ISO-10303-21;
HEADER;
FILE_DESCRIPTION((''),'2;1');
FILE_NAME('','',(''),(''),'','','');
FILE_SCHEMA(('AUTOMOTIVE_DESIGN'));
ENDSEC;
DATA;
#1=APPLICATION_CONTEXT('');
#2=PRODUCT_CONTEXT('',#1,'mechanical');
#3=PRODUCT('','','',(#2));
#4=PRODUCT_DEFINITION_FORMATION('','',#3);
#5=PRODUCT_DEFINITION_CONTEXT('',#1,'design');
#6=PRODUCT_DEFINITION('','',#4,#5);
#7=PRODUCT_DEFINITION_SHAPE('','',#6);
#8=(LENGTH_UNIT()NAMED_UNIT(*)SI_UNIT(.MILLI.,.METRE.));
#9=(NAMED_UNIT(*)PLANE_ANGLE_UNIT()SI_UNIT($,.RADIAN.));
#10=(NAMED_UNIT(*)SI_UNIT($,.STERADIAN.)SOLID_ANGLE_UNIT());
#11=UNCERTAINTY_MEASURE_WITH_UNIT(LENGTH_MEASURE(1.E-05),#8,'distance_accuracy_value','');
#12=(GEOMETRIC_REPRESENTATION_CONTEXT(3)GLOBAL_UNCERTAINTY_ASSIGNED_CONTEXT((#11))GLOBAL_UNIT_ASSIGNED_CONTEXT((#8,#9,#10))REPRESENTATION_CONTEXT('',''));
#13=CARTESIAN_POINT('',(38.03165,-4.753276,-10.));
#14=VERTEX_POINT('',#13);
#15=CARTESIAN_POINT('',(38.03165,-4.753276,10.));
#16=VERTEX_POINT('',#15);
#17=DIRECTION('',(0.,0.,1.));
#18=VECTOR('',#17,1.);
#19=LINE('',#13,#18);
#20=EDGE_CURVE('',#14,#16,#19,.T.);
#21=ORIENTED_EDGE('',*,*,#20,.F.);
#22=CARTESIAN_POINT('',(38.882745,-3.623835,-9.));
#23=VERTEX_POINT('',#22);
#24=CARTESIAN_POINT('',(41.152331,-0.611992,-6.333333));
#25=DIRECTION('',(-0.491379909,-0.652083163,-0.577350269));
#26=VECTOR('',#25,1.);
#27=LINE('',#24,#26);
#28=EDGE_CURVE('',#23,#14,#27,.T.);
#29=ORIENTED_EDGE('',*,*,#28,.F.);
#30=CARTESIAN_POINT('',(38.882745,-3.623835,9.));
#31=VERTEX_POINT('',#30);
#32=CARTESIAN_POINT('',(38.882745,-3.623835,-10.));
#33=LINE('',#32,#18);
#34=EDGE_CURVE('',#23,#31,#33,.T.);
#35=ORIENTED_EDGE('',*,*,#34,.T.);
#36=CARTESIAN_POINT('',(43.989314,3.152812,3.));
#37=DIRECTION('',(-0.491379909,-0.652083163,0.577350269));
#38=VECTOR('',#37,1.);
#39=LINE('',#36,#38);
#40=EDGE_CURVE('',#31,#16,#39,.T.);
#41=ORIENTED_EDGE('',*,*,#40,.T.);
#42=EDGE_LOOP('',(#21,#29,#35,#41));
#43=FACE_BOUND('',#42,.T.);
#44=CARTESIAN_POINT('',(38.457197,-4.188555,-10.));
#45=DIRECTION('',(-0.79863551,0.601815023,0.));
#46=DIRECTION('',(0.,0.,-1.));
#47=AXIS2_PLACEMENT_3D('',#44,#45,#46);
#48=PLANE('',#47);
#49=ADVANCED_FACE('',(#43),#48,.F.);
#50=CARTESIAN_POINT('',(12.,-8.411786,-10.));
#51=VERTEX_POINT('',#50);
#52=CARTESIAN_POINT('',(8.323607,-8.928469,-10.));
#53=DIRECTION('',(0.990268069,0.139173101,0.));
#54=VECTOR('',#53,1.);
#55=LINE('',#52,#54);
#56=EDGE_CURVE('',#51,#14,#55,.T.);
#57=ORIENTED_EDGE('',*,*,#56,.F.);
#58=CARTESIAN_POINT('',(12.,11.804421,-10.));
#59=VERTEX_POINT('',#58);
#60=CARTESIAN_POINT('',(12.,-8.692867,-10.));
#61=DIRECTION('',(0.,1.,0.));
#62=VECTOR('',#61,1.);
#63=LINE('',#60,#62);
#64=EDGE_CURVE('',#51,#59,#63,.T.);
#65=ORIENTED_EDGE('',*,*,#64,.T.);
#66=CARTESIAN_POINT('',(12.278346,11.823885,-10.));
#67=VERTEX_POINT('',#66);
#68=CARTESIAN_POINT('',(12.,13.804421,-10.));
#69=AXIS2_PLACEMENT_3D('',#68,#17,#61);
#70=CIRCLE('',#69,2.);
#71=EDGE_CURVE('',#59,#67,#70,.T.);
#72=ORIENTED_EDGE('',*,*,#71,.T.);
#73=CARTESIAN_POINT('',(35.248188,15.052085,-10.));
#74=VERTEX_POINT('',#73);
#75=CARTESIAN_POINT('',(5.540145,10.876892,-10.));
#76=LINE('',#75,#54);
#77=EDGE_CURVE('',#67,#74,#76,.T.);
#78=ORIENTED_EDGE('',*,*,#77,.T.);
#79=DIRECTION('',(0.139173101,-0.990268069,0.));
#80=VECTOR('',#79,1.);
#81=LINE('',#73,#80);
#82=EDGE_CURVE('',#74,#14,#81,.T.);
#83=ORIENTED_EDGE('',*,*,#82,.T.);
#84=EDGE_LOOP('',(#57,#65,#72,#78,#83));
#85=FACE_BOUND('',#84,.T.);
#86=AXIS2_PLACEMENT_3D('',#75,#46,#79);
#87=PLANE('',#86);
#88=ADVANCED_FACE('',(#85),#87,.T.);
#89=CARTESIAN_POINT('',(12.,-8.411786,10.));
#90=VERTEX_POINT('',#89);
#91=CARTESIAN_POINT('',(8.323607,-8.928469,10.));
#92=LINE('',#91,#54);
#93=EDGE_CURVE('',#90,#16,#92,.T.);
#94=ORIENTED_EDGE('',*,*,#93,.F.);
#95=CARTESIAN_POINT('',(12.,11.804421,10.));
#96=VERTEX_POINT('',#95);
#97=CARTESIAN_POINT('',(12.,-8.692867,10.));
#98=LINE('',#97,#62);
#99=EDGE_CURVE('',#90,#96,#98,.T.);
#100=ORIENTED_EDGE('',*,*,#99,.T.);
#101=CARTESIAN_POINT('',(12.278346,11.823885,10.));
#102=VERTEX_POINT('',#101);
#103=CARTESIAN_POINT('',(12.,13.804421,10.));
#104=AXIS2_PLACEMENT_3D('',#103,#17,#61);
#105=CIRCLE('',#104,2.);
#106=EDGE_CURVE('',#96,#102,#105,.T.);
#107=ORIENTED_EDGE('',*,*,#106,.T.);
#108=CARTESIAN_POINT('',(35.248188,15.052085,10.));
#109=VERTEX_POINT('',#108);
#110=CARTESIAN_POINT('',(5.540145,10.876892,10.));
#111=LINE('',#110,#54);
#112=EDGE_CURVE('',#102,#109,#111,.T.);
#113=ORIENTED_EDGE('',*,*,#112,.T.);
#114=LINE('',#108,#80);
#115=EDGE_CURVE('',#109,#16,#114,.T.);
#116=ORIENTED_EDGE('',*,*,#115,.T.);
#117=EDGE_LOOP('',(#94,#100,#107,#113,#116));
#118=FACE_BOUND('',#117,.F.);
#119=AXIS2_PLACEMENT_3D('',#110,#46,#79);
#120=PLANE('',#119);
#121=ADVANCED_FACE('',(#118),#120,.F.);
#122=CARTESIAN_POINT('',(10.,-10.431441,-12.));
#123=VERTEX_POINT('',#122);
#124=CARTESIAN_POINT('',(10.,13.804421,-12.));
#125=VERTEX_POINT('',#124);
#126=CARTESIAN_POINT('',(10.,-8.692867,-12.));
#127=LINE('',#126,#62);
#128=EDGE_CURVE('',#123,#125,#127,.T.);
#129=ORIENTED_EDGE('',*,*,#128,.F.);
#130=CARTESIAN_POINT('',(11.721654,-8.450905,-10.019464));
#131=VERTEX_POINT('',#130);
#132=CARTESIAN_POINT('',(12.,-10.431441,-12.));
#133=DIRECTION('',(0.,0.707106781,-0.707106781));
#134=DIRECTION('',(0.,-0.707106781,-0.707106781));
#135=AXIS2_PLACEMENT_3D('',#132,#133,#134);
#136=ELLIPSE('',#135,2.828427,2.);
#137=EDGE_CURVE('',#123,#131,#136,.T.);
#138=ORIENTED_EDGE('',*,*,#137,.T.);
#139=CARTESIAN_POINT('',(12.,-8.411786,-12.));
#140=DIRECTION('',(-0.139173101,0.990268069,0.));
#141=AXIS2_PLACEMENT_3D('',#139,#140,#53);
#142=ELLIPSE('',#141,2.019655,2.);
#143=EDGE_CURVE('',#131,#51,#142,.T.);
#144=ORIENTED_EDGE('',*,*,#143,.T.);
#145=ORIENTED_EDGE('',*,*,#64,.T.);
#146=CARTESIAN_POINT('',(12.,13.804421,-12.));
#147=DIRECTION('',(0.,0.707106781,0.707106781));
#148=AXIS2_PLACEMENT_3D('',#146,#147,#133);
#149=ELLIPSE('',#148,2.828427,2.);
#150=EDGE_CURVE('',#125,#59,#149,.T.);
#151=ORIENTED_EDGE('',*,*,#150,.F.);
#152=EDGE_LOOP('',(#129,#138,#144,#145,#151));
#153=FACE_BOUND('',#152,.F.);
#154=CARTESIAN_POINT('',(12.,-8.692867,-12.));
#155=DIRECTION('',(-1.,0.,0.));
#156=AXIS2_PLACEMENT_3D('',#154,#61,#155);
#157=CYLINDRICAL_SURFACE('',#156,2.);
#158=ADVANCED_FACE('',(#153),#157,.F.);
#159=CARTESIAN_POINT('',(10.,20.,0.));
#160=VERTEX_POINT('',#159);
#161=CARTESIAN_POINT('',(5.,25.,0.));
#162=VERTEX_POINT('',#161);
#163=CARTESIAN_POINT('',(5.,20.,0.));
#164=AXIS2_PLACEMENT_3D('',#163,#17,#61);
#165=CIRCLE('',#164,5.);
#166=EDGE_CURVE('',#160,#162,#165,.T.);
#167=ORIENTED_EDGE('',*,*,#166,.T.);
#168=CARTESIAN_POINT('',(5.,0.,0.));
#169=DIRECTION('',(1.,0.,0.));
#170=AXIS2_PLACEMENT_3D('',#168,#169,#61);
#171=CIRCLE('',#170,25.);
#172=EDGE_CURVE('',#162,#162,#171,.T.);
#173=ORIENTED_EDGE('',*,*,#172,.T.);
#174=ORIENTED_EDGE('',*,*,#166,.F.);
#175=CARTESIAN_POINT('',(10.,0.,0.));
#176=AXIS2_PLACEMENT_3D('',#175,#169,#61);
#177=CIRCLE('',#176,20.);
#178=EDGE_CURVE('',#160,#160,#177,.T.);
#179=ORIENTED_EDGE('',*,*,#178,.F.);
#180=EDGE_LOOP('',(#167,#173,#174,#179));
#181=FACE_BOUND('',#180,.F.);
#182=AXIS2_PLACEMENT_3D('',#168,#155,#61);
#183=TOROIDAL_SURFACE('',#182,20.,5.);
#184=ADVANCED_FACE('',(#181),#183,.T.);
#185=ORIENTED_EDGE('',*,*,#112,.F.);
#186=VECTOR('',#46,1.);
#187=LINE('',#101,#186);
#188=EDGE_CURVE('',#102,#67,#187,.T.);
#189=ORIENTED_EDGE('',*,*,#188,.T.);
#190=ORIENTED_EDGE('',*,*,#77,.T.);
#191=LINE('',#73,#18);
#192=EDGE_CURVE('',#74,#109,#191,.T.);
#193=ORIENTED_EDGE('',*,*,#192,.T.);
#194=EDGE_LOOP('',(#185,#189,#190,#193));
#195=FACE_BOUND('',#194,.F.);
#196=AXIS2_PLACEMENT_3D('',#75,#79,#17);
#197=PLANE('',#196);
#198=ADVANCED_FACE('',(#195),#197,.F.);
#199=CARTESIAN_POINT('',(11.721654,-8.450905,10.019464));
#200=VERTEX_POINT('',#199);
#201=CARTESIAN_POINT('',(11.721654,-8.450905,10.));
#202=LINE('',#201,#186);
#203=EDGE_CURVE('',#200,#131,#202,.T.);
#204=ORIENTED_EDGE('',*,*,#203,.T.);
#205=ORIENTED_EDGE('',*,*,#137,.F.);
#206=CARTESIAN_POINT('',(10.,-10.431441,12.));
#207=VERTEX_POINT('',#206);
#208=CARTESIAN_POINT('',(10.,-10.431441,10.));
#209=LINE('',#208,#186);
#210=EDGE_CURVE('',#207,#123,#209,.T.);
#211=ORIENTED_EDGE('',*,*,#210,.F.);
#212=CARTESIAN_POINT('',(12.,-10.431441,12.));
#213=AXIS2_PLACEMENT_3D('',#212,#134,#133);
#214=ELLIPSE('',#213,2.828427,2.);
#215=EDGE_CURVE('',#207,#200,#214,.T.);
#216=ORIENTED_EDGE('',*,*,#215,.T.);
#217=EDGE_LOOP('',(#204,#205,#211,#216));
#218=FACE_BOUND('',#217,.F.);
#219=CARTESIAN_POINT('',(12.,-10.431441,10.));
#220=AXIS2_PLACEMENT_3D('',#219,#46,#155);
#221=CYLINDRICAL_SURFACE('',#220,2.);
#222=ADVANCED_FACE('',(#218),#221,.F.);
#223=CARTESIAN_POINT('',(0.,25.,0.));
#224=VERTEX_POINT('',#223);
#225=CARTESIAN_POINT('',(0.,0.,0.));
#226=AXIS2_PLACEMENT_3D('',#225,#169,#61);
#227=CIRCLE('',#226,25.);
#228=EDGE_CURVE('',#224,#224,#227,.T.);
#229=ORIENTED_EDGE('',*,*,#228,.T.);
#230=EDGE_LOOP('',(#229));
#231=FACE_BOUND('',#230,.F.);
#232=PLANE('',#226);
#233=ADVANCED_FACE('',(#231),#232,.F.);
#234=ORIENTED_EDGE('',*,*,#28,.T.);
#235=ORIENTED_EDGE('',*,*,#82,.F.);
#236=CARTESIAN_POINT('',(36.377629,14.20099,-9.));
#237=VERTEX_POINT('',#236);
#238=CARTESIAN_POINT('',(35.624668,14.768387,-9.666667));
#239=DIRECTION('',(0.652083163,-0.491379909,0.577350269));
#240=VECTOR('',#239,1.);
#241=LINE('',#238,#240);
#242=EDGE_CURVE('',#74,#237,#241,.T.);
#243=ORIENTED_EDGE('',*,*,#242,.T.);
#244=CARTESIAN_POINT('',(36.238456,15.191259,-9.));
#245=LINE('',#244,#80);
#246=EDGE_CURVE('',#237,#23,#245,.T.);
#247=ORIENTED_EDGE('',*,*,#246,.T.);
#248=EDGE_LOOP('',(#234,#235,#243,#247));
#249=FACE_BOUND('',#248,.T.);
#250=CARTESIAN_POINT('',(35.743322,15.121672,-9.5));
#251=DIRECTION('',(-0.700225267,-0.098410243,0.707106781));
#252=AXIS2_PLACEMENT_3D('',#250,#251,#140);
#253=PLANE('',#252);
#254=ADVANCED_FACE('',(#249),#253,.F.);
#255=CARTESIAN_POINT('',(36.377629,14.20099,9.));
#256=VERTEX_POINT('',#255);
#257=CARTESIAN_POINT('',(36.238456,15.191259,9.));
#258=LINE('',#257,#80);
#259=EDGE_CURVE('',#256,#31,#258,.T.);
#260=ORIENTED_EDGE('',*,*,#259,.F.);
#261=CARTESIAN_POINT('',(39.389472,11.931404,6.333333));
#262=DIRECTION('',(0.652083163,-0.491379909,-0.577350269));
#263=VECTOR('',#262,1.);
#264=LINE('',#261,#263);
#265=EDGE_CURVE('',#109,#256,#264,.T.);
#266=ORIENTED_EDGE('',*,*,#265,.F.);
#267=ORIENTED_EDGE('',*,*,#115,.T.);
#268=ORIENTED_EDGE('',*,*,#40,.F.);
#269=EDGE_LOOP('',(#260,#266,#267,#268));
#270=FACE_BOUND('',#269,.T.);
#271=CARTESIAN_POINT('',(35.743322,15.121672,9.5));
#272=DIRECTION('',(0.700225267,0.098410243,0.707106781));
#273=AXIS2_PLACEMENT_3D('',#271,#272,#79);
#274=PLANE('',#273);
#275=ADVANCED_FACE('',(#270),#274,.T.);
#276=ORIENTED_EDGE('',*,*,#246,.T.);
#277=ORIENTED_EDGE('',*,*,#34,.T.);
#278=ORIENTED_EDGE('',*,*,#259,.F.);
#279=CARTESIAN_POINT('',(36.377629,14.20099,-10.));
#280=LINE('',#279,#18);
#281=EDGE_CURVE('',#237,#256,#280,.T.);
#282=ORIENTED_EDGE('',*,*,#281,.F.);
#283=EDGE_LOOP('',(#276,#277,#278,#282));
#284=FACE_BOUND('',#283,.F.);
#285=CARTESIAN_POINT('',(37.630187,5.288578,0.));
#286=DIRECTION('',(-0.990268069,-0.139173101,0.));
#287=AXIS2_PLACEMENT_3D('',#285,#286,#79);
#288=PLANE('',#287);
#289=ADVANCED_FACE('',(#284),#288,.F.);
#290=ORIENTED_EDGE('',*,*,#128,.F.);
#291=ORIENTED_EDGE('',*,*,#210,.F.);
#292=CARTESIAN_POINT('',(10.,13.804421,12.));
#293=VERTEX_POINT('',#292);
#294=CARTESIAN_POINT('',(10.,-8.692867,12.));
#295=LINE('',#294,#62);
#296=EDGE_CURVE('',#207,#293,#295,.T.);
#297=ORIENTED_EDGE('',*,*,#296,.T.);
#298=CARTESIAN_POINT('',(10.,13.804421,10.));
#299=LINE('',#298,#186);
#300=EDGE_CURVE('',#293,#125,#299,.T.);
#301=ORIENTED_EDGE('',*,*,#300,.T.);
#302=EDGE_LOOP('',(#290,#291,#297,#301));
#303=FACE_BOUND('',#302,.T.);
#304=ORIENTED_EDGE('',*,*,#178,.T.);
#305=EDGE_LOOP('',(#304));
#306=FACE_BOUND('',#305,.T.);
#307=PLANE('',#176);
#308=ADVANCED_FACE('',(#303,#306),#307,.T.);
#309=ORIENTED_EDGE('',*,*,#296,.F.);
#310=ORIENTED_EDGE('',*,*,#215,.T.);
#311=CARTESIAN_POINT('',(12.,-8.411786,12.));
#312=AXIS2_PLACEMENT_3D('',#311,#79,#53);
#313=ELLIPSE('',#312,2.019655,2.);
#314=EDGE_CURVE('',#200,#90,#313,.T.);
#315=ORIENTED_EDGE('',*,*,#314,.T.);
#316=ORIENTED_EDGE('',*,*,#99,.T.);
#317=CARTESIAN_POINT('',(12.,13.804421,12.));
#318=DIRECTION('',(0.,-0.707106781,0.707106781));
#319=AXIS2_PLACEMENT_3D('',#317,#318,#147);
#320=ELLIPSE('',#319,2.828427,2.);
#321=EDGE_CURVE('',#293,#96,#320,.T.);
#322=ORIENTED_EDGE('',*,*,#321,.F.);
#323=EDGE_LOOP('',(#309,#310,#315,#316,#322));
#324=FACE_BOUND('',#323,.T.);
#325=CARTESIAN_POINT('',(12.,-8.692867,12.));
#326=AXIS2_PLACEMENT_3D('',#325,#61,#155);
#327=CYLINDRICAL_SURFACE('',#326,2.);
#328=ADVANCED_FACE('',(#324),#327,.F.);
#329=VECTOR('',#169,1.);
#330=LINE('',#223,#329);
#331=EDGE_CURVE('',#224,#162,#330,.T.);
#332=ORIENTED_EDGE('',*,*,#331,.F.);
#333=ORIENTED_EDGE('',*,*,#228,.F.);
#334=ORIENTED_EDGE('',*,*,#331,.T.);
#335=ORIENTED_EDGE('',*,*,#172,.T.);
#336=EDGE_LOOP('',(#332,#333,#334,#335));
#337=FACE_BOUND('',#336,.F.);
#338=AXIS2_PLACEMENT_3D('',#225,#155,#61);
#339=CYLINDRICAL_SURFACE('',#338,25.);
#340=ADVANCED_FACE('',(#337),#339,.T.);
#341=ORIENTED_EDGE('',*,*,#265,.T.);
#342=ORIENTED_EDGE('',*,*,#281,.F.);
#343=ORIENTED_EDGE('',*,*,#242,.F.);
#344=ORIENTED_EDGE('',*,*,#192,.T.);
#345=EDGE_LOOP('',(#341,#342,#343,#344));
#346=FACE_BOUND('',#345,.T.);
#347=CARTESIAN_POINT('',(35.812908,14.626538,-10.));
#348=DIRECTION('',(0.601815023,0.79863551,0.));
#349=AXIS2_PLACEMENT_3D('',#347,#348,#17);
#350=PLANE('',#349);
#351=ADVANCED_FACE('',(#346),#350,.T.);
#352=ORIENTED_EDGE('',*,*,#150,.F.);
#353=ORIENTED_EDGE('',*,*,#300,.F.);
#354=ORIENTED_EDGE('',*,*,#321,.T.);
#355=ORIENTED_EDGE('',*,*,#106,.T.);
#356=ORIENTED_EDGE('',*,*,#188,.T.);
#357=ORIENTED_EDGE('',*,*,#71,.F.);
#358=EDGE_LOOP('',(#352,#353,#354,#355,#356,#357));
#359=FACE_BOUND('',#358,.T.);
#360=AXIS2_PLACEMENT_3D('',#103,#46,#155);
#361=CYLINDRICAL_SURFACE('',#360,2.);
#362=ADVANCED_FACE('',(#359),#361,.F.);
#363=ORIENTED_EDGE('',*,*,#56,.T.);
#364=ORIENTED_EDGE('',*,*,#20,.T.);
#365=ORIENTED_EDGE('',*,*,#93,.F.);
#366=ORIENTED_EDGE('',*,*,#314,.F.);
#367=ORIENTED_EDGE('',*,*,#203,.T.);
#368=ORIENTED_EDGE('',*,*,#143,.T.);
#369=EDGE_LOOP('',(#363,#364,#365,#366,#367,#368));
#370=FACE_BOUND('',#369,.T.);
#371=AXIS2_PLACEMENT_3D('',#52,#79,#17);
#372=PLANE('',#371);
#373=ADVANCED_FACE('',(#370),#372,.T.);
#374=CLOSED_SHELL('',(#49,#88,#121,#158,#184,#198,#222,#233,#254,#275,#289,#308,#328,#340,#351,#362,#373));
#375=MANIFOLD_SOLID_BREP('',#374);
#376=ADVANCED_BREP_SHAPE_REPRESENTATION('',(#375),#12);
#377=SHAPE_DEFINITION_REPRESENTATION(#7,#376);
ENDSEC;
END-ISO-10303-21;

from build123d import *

# Parameters (mm, degrees)
F0_R     = 25
F1_DEPTH = 10
F5_W     = 20
F5_H     = 20
F6_DEPTH = 31
F7_SIZE  = 1
F8_R     = 5
F9_R     = 2


# Not quite as in the source:
# - a feature names something its author has since deleted; it is built from what else it names


with BuildPart() as f1:
    # F0 (on Right) → F1 (new body)
    with BuildSketch(Plane.YZ):
        Circle(F0_R)
    extrude(amount=F1_DEPTH)

    # F5 (on offset) → F6 (join)
    with BuildSketch(Plane(origin=(6.9318764812, 0.9742117067, 0), x_dir=(0.139173101, -0.9902680687, 0), z_dir=(-0.9902680687, -0.139173101, 0))):
        Rectangle(F5_W, F5_H)
    extrude(amount=-F6_DEPTH)

    # F7
    f7_edges = [f1.edges().sort_by_distance(p)[0] for p in [
        (39.021918, -4.614103, 0),
        (37.630187, 5.288578, 10),
        (36.238456, 15.191259, 0),
        (37.630187, 5.288578, -10),
    ]]
    chamfer(f7_edges, length=F7_SIZE)

    # F8
    f8_edges = [f1.edges().sort_by_distance(p)[0] for p in [
        (10, -25, 0),
    ]]
    fillet(f8_edges, radius=F8_R)

    # F9
    f9_edges = [f1.edges().sort_by_distance(p)[0] for p in [
        (10, 1.405408, -10),
        (10, -8.692867, 0),
        (10, 1.405408, 10),
        (10, 11.503684, 0),
    ]]
    fillet(f9_edges, radius=F9_R)


solid = f1.part
